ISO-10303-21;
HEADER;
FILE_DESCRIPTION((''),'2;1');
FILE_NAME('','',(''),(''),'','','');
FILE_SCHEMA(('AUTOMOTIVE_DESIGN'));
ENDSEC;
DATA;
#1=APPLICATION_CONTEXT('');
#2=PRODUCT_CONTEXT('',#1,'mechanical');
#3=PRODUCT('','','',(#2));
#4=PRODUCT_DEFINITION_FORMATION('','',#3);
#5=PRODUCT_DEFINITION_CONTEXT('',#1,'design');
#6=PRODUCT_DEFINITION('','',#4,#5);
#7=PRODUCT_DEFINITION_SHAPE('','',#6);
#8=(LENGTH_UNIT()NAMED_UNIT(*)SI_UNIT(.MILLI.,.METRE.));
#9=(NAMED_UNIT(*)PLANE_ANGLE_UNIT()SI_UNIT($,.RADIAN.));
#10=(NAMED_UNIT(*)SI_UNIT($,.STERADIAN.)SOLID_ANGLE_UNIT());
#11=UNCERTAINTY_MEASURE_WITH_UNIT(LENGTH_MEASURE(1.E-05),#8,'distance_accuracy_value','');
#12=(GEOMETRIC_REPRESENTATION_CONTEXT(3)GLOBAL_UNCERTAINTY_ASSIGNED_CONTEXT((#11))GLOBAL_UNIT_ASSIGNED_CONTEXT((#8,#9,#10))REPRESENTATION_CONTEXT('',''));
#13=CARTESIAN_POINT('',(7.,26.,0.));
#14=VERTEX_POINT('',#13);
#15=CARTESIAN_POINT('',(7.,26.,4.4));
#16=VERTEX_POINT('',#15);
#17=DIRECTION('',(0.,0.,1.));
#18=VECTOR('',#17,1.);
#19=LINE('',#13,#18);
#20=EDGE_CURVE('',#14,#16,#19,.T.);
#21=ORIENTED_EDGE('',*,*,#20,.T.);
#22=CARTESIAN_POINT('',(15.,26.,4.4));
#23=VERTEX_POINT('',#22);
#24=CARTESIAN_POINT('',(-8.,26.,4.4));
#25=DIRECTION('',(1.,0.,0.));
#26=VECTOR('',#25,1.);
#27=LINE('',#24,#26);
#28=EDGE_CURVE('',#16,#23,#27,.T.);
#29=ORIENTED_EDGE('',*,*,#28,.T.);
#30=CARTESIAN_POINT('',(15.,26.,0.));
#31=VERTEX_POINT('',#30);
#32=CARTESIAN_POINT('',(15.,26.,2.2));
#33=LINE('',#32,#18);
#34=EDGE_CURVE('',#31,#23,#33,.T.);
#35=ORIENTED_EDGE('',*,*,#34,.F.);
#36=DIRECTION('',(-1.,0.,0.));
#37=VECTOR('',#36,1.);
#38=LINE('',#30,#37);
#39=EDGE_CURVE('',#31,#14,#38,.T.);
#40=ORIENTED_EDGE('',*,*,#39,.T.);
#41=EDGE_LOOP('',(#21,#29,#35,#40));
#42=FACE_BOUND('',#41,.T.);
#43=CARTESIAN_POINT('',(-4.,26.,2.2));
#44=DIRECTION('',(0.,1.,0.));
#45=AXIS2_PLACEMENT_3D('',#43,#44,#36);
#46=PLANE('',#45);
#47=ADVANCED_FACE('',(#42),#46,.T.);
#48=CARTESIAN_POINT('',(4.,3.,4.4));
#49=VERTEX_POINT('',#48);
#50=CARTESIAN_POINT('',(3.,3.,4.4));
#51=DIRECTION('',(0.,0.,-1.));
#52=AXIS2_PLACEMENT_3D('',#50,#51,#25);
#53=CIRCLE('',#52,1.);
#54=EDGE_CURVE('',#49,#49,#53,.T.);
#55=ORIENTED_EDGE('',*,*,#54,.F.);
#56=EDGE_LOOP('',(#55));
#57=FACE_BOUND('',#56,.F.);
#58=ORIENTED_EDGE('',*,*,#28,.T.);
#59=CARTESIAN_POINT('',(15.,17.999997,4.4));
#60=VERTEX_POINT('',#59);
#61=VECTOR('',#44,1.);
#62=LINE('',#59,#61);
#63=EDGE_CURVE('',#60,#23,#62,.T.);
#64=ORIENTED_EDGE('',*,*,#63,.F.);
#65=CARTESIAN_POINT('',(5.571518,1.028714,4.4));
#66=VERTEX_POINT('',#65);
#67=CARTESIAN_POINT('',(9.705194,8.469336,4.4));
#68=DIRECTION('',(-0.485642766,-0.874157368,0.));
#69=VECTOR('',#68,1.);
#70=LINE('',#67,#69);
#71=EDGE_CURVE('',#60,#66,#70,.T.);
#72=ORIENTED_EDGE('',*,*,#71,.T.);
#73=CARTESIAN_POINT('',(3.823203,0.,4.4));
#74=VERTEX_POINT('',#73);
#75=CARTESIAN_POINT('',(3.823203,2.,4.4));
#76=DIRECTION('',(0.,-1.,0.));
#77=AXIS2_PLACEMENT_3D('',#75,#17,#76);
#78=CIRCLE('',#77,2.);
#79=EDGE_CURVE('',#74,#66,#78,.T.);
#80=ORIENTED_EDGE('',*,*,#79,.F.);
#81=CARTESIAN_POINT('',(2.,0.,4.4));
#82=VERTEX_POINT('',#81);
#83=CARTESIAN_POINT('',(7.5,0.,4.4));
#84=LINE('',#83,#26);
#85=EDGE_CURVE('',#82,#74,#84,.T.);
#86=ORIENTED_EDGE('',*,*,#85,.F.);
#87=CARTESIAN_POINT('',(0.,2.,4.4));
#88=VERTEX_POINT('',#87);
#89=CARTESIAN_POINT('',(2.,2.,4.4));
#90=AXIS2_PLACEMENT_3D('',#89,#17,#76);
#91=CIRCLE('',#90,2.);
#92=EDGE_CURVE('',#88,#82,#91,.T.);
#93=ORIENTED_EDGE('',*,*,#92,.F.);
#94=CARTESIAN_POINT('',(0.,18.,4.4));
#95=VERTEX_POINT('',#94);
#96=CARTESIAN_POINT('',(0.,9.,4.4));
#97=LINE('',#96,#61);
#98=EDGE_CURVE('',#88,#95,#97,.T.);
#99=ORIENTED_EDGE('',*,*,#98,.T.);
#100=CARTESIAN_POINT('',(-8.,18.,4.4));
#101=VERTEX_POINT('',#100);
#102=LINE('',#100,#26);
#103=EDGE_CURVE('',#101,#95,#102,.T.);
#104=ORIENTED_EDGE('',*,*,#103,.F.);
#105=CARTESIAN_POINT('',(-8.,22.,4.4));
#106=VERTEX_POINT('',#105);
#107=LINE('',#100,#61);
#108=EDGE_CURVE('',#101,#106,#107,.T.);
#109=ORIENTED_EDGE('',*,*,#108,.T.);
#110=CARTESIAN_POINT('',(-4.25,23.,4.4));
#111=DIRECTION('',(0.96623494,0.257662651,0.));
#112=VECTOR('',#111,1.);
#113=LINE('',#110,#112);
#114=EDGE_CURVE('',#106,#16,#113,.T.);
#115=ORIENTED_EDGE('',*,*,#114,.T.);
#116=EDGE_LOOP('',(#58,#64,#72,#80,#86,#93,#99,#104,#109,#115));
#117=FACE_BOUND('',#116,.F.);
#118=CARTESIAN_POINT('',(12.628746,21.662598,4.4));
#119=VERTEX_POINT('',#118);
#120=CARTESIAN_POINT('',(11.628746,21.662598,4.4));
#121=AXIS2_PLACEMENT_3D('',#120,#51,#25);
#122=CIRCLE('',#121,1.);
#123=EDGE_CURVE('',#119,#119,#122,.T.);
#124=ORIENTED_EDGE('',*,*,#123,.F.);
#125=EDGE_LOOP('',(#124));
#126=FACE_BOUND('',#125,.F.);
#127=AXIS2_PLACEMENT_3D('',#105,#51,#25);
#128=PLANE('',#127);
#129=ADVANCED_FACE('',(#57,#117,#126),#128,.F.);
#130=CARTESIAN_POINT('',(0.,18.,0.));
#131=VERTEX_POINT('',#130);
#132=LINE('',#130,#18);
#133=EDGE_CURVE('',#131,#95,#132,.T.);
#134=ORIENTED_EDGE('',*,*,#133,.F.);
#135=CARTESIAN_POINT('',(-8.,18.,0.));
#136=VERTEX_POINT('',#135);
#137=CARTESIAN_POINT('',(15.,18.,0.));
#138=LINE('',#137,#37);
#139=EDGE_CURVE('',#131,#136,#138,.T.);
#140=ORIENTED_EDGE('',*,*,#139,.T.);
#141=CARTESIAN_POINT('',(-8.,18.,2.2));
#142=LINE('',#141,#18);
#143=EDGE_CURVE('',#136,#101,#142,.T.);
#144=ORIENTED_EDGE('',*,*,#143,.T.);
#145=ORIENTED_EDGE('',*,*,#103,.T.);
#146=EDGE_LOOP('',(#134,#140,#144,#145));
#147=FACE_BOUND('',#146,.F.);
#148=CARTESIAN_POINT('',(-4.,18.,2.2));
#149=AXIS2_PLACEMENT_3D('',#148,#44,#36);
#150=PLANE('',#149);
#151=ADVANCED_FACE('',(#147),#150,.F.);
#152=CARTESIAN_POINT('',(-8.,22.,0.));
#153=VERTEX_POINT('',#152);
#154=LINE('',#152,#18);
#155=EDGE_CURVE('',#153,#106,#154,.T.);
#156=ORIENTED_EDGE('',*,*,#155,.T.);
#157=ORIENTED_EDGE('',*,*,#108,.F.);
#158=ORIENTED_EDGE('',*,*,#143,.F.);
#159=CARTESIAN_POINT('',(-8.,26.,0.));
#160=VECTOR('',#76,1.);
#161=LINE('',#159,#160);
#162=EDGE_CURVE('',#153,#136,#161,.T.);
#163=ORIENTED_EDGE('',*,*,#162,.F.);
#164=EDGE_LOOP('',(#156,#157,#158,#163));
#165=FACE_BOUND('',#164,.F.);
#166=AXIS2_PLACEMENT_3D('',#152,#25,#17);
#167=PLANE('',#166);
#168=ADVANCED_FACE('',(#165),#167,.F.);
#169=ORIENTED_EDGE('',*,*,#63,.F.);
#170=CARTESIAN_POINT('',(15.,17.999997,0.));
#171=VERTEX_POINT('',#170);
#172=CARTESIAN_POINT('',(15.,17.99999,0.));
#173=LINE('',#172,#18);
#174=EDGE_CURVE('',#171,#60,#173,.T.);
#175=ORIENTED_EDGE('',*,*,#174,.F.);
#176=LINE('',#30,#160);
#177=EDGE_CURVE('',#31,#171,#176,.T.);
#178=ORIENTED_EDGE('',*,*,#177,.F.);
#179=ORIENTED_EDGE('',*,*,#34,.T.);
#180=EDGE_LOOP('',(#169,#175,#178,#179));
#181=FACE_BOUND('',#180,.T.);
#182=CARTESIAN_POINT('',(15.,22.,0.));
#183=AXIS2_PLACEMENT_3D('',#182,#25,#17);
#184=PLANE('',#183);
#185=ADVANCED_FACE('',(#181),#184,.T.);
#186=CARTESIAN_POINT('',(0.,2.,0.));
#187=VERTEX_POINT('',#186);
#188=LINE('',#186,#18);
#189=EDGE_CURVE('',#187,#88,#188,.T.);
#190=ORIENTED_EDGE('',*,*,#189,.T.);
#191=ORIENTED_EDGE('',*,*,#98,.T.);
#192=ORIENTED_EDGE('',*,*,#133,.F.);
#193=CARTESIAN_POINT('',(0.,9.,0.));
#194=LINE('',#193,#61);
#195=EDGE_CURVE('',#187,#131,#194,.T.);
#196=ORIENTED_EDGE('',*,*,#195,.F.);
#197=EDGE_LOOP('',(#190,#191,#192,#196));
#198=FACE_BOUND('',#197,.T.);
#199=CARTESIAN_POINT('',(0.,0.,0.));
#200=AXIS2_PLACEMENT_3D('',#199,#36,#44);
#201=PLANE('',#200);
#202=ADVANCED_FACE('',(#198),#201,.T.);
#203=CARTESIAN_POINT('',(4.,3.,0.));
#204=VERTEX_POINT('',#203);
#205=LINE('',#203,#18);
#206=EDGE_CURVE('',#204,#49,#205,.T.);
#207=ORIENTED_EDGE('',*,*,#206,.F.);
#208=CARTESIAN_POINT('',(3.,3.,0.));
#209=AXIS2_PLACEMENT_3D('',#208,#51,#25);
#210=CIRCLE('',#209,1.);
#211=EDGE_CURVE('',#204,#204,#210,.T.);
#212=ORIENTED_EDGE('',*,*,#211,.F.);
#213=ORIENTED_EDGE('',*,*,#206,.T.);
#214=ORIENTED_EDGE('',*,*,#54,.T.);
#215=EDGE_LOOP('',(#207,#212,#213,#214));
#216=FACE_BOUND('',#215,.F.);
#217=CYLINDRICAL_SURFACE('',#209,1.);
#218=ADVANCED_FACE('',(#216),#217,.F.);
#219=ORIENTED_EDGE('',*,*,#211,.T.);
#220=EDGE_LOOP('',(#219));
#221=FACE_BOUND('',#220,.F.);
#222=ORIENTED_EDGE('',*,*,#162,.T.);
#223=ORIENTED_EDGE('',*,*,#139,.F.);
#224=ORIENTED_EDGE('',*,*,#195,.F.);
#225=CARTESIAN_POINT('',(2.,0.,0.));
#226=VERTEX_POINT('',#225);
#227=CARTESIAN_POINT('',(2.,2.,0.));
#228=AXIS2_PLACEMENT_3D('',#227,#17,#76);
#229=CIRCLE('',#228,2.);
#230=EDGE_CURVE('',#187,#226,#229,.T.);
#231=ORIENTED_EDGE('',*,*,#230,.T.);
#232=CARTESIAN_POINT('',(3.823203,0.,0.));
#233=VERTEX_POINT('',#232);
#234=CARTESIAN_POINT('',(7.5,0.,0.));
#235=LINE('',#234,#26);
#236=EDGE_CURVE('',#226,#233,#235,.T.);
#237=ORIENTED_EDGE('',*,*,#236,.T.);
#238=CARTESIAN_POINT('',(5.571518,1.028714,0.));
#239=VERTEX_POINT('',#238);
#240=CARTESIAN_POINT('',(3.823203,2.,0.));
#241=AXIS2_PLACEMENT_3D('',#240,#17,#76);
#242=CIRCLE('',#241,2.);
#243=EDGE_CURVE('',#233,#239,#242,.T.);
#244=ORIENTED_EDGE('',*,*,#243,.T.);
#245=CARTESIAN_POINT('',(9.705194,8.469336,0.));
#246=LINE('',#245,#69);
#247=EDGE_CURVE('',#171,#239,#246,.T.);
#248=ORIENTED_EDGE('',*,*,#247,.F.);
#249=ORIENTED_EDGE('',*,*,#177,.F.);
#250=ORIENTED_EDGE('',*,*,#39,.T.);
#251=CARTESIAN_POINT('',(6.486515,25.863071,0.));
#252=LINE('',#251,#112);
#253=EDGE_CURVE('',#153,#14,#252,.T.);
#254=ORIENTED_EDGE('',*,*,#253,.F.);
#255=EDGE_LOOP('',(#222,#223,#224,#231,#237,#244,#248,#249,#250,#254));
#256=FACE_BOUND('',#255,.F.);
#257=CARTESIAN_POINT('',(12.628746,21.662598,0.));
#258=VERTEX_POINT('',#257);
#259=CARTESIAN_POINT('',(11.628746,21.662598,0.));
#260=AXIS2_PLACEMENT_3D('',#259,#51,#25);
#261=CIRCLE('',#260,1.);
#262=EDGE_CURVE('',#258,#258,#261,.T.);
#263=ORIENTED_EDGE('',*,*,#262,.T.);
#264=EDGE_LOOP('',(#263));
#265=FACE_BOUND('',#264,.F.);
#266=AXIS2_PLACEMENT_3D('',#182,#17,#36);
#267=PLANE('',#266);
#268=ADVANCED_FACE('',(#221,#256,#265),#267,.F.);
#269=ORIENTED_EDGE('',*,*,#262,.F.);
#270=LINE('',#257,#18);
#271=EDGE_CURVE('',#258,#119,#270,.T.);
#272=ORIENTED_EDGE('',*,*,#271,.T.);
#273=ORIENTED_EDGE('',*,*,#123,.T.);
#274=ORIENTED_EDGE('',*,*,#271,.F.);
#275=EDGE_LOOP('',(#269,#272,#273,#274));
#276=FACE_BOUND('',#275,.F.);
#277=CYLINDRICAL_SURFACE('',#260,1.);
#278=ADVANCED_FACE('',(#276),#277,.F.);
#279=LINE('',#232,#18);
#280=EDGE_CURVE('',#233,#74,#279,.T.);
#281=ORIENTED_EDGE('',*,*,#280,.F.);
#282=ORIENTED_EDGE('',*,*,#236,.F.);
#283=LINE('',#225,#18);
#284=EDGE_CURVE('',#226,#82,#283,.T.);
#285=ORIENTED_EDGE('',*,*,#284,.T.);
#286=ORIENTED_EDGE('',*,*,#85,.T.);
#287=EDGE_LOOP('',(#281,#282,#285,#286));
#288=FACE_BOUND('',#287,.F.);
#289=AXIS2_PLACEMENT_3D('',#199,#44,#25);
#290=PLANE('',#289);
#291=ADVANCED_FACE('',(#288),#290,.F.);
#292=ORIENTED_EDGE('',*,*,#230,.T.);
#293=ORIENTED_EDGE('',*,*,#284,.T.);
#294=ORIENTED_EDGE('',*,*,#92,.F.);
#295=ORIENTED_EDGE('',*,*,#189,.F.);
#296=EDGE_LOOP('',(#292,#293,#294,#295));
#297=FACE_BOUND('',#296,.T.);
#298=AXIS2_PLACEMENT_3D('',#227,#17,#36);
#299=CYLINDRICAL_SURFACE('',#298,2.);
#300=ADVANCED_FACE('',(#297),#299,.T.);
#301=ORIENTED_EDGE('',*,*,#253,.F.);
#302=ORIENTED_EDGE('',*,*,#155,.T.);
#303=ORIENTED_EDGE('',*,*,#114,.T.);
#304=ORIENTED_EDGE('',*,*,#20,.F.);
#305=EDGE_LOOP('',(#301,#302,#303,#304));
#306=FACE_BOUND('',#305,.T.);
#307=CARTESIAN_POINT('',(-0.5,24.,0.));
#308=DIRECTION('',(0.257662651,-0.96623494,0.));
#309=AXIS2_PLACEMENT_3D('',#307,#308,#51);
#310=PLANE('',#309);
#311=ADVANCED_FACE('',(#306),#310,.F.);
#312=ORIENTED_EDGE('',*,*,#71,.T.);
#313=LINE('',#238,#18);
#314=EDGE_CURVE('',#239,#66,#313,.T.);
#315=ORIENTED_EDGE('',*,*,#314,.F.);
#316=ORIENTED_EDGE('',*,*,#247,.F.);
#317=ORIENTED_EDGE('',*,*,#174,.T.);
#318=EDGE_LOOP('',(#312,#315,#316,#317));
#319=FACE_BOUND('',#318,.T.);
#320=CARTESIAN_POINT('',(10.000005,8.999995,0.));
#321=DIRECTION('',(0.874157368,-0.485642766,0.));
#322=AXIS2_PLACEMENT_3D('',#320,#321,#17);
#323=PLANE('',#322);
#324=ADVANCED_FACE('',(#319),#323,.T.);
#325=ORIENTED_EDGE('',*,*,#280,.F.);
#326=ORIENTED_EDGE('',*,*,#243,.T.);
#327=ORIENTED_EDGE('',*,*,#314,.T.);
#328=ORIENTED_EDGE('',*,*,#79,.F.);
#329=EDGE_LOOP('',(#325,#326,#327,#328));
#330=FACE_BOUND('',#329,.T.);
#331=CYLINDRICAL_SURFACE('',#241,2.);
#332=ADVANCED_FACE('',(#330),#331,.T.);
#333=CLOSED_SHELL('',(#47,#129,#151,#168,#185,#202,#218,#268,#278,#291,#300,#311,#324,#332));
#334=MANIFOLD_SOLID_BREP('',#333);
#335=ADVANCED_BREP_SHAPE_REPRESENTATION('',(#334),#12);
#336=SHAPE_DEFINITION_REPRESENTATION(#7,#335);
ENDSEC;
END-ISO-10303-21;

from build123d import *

# Parameters (mm, degrees)
F0_W      = 15
F0_H      = 18
F1_DEPTH  = 4.4
F2_R      = 2
F3_SIZE2  = 9.99999
F3_SIZE   = 17.99999
F4_R      = 2
F6_W      = 8
F6_H      = 4.4
F6_W_2    = 15
F7_DEPTH  = 4
F8_DEPTH  = 4
F9_SIZE2  = 15
F9_SIZE   = 4
F10_DEPTH = 4.4
F11_R     = 1
F12_DEPTH = 4.4


# Not quite as in the source:
# - a fillet or chamfer is up to 0.001 mm smaller than in the source, because OpenCascade refuses the exact size


with BuildPart() as f1:
    # F0 (on Top) → F1 (new body)
    with BuildSketch(Plane.XY):
        with Locations((7.5, 9)):
            Rectangle(F0_W, F0_H)
    extrude(amount=F1_DEPTH)

    # F2
    f2_edges = [f1.edges().sort_by_distance(p)[0] for p in [
        (0, 0, 2.2),
    ]]
    fillet(f2_edges, radius=F2_R)

    # F3 (size 18 and 10 in the source; OpenCascade refuses exactly that, so slightly less here)
    f3_edges = [f1.edges().sort_by_distance(p)[0] for p in [
        (15, 0, 2.2),
    ]]
    f3_side = f1.faces().sort_by_distance((15, 9, 2.2))[0]
    chamfer(f3_edges, length=F3_SIZE, length2=F3_SIZE2, reference=f3_side)

    # F4
    f4_edges = [f1.edges().sort_by_distance(p)[0] for p in [
        (5.00001, 0, 2.2),
    ]]
    fillet(f4_edges, radius=F4_R)

    # F6 (on face) → F7 (join)
    with BuildSketch(Plane(origin=(0, 18, 0), x_dir=(-1, 0, 0), z_dir=(0, 1, 0))):
        with Locations((4, 2.2)):
            Rectangle(F6_W, F6_H)
        with Locations((-7.5, 2.2)):
            Rectangle(F6_W_2, F6_H)
    extrude(amount=F7_DEPTH)

    # F8 (add): a face of the model
    f8_faces = [f1.faces().sort_by_distance(p)[0] for p in [
        (3.5, 22, 2.2),
    ]]
    extrude(f8_faces, amount=F8_DEPTH)

    # F9
    f9_edges = [f1.edges().sort_by_distance(p)[0] for p in [
        (-8, 26, 2.2),
    ]]
    f9_side = f1.faces().sort_by_distance((-8, 22, 2.2))[0]
    chamfer(f9_edges, length=F9_SIZE, length2=F9_SIZE2, reference=f9_side)

    # F5 (on face) → F10 (cut)
    with BuildSketch(Plane(origin=(0, 0, 0), x_dir=(1, 0, 0), z_dir=(0, 0, -1))):
        with BuildLine():
            ThreePointArc((2, -3), (3, -4), (4, -3))
            ThreePointArc((4, -3), (3, -2), (2, -3))
        make_face()
    extrude(amount=-F10_DEPTH, mode=Mode.SUBTRACT)

    # F11 (on face) → F12 (cut)
    with BuildSketch(Plane(origin=(0, 0, 0), x_dir=(1, 0, 0), z_dir=(0, 0, -1))):
        with Locations((11.6287460551, -21.6625984758)):
            Circle(F11_R)
    extrude(amount=-F12_DEPTH, mode=Mode.SUBTRACT)


solid = f1.part
